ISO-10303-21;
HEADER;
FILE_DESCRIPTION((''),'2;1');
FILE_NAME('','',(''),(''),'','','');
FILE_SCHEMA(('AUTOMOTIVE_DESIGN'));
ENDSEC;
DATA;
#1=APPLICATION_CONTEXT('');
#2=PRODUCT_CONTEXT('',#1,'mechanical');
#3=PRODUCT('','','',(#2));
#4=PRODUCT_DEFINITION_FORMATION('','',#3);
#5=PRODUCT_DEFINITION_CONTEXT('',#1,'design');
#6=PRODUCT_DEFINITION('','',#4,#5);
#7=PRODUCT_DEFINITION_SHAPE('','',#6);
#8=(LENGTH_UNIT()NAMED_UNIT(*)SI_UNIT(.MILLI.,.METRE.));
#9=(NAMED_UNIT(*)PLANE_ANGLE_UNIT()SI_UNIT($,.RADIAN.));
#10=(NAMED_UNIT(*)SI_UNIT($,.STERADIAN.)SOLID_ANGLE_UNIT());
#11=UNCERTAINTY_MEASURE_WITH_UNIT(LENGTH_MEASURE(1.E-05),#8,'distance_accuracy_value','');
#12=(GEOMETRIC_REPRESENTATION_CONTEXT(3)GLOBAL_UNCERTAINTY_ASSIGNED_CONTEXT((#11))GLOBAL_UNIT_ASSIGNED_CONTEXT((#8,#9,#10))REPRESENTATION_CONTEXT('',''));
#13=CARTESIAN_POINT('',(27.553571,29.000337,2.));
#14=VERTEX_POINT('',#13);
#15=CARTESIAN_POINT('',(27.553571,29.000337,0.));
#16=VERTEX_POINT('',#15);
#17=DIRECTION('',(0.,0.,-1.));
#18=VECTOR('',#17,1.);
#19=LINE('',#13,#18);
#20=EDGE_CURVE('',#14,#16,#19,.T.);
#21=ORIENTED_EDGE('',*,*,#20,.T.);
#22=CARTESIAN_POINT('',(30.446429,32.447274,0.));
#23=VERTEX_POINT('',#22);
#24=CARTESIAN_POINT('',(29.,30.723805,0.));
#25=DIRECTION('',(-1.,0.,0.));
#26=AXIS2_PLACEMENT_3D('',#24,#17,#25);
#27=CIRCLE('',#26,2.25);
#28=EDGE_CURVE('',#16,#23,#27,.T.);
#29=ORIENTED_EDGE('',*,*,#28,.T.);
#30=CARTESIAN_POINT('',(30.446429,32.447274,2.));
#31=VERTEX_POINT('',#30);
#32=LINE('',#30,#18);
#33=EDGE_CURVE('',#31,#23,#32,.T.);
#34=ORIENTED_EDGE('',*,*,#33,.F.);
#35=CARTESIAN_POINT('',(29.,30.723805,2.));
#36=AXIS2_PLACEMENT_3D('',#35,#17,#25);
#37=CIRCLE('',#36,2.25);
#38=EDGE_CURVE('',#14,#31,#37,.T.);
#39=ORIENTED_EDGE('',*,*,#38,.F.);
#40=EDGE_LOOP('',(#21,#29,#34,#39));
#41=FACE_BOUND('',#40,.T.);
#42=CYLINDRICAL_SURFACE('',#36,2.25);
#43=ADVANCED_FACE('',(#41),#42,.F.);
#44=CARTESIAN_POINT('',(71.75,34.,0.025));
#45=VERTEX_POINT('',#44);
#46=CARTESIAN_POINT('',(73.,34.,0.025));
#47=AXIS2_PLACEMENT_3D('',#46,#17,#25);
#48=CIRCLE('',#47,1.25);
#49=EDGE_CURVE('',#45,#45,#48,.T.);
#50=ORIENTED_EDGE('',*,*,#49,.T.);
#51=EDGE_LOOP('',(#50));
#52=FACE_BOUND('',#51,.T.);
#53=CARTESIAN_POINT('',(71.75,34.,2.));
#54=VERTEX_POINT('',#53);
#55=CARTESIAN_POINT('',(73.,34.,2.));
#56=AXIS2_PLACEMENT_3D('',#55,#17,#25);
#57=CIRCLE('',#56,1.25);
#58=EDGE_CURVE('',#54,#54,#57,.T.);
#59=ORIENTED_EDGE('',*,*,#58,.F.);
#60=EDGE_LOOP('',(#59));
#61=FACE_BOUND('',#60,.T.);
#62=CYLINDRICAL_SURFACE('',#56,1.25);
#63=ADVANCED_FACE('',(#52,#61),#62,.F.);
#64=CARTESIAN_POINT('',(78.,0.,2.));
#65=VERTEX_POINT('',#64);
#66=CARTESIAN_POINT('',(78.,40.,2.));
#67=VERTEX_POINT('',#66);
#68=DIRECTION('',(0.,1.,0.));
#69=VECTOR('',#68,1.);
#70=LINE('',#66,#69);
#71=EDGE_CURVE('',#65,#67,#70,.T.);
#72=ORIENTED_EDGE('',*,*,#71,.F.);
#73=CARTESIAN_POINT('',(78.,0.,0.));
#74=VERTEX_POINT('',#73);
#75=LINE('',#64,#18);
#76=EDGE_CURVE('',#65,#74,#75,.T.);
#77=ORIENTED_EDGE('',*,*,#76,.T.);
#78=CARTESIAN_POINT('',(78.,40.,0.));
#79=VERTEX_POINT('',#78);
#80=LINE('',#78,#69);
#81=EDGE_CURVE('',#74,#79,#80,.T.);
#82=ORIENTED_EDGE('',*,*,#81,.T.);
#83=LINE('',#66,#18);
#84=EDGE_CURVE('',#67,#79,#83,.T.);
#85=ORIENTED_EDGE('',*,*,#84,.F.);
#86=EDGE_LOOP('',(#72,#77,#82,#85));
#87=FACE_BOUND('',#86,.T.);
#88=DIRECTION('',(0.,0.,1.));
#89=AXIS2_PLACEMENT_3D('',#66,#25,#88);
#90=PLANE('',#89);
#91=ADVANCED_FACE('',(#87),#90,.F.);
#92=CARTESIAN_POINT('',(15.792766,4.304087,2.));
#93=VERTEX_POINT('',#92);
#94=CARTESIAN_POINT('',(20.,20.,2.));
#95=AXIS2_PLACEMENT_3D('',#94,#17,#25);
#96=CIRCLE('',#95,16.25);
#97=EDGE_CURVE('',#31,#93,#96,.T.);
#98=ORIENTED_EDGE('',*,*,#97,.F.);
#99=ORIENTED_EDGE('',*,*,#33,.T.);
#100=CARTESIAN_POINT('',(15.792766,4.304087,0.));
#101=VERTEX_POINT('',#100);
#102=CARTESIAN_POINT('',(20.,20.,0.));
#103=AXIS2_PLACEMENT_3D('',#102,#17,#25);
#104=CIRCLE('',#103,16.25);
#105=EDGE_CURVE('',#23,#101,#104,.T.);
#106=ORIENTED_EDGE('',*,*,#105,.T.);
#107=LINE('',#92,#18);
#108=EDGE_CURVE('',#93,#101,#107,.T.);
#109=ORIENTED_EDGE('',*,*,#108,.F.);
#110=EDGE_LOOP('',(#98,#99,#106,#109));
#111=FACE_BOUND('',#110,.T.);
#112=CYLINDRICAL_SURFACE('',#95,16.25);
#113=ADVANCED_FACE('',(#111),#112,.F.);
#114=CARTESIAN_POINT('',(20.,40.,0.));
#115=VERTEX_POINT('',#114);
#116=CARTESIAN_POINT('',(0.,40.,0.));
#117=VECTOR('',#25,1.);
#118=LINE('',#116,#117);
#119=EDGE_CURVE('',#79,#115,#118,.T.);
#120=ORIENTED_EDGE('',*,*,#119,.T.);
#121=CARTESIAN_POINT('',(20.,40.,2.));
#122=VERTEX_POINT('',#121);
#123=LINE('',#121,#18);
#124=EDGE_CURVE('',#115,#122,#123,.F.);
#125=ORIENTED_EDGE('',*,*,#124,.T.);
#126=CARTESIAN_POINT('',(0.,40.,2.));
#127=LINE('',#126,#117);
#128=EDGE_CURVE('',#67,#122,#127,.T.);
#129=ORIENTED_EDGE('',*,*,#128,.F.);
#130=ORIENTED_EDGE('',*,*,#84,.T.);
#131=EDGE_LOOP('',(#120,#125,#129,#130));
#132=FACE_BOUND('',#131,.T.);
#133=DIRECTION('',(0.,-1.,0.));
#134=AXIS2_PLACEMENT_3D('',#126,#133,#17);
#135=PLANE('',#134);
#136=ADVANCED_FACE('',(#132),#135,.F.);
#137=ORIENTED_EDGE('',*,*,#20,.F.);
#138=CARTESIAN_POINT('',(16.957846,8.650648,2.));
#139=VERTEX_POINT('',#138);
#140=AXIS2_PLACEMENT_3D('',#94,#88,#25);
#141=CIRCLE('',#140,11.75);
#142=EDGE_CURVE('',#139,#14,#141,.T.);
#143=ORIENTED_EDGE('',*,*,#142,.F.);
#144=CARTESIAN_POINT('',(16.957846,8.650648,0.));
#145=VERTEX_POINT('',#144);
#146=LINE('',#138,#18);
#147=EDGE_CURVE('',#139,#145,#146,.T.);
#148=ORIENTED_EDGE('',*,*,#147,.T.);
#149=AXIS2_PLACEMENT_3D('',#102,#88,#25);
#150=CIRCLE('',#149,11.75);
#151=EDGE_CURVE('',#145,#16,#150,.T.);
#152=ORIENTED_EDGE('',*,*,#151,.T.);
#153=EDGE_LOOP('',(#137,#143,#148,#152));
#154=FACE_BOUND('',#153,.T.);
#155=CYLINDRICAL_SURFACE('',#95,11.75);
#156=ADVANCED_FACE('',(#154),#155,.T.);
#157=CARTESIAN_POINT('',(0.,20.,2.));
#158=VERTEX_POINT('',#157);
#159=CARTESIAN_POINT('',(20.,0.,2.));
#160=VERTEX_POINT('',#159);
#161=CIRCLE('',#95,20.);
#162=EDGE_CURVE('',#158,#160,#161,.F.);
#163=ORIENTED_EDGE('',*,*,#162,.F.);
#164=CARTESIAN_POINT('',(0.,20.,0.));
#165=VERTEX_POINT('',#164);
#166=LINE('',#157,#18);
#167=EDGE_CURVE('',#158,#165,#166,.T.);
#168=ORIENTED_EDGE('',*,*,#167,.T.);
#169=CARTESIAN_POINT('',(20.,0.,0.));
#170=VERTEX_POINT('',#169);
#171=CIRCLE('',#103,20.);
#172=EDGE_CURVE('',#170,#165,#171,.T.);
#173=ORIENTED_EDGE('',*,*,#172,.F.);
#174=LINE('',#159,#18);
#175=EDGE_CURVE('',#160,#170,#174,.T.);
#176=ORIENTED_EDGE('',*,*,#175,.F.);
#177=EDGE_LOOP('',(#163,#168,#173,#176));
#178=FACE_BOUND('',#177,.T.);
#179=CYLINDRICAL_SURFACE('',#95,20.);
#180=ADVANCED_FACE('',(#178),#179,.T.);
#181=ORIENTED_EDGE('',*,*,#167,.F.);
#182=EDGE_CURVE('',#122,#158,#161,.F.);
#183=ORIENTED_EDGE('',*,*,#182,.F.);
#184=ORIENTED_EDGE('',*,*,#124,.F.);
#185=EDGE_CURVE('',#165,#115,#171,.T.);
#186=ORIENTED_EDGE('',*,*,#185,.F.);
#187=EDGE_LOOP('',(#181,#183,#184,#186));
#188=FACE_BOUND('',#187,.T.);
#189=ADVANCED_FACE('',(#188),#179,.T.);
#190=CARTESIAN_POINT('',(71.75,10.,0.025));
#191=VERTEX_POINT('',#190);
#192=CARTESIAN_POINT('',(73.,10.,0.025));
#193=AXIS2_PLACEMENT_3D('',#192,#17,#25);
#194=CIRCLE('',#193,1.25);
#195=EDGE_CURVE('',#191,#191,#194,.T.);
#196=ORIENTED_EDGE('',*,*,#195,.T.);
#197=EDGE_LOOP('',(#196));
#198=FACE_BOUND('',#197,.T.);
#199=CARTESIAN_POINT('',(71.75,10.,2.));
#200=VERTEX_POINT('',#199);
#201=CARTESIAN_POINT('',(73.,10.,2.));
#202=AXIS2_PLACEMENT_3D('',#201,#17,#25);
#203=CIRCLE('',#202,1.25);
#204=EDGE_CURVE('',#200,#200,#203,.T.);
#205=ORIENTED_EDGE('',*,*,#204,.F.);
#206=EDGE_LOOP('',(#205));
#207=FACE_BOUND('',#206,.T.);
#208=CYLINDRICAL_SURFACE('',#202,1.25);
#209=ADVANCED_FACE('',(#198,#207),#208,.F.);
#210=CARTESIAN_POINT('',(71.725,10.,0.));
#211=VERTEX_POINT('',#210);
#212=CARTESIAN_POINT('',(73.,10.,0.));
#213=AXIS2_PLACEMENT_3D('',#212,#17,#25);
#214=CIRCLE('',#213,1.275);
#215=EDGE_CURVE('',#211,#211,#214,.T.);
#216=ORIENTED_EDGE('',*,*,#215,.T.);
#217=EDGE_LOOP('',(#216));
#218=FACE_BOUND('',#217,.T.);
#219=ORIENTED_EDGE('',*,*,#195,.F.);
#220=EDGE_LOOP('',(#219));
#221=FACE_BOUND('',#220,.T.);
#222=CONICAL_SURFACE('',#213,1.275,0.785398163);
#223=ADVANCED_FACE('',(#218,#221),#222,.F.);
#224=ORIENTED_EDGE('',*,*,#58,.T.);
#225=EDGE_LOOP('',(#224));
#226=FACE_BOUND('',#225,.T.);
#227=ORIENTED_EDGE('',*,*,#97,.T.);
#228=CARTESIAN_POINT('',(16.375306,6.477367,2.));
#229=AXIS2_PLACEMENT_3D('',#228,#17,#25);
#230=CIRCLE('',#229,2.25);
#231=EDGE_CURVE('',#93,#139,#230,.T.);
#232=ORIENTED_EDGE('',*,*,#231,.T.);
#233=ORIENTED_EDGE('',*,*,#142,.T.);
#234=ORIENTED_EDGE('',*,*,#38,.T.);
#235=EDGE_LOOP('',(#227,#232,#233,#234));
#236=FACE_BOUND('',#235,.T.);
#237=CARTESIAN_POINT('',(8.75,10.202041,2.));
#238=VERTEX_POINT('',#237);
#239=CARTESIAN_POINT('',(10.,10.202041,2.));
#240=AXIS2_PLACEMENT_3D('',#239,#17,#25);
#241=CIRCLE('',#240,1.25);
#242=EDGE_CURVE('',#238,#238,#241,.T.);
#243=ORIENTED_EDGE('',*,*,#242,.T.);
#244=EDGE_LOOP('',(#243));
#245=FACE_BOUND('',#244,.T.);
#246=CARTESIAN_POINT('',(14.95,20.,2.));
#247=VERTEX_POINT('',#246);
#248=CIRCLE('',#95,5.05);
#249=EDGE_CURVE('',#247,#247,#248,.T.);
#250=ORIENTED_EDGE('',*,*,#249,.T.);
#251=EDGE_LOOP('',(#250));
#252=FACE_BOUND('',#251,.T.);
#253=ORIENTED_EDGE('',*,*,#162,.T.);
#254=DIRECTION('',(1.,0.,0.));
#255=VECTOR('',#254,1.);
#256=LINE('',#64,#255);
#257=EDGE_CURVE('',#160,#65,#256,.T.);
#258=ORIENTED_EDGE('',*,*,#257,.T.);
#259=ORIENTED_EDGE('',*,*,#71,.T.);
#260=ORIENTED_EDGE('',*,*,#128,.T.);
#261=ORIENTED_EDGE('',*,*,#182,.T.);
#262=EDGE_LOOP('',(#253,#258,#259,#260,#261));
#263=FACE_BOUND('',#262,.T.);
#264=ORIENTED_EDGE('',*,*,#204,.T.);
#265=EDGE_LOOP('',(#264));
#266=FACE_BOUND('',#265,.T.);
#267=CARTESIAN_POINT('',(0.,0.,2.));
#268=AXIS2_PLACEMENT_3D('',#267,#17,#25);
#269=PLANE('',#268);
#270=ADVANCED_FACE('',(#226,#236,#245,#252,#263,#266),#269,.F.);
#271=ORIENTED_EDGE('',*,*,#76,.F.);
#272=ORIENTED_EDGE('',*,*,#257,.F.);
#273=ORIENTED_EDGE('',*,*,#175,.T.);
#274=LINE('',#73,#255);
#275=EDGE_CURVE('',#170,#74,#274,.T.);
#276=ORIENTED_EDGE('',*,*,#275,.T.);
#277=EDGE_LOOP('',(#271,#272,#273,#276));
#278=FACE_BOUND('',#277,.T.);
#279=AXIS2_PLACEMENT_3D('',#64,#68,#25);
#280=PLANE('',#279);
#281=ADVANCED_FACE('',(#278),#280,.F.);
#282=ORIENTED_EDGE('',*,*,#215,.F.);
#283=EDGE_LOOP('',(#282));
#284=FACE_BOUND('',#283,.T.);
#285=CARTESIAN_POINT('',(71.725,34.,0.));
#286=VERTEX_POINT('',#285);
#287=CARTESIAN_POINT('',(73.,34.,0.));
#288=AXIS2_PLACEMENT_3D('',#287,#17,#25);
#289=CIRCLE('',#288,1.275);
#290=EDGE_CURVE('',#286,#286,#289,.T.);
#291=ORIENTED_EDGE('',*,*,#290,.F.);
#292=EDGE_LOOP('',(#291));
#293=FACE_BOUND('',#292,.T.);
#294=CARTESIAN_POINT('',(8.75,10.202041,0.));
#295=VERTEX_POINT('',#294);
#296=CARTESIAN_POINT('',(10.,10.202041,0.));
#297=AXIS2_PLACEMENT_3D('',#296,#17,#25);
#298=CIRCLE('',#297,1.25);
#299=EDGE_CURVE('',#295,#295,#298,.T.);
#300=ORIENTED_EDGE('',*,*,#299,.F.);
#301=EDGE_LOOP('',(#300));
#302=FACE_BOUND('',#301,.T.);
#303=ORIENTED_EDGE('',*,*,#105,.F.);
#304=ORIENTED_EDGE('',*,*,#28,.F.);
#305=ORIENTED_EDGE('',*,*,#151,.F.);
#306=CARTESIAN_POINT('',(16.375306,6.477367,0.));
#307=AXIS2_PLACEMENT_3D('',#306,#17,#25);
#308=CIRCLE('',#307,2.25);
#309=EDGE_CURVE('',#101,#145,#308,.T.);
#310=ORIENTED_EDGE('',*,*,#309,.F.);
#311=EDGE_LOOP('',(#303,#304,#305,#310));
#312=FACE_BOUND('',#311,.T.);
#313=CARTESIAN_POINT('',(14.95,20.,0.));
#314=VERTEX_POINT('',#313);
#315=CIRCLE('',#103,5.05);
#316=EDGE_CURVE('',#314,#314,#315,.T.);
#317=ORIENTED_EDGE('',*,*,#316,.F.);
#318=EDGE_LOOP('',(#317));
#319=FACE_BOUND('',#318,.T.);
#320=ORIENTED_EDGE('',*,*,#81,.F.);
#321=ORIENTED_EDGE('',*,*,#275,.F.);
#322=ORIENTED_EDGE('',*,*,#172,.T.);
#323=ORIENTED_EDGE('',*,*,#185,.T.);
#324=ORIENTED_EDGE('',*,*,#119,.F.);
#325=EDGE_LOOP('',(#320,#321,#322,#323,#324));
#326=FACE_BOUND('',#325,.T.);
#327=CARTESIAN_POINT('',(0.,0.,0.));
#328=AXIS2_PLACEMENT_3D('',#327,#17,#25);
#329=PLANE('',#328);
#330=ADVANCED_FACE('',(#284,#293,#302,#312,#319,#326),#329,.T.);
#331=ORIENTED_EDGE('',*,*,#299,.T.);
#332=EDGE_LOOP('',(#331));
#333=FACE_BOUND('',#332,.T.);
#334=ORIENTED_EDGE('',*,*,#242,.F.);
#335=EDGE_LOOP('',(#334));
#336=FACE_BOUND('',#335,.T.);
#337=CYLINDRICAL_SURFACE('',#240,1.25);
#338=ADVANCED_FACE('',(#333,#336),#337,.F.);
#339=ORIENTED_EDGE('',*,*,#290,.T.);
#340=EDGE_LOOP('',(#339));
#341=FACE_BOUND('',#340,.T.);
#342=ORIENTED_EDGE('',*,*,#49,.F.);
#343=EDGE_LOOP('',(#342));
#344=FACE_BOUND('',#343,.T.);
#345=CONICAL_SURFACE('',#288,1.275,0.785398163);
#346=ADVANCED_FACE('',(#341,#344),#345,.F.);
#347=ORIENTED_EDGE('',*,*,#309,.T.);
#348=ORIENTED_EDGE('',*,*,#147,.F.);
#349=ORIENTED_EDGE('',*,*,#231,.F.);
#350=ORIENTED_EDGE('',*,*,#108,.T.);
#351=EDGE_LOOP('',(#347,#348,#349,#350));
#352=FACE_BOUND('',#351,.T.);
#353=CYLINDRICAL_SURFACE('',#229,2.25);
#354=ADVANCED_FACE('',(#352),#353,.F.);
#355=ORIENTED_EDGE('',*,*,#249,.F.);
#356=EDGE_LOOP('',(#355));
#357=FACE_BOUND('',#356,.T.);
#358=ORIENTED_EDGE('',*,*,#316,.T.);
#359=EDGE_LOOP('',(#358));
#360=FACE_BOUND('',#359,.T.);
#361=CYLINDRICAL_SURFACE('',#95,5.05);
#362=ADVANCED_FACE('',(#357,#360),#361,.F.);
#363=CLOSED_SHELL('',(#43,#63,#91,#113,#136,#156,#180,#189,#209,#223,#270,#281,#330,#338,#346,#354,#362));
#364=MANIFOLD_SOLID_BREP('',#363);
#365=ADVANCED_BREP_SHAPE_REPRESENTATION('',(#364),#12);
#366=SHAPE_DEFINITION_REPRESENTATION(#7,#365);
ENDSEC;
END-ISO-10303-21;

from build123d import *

# Parameters (mm, degrees)
SKETCH_2_W                   = 78
SKETCH_2_H                   = 40
EXTRUDE_1_DEPTH              = 2
SKETCH_3_R                   = 5.05
SKETCH_3_R_2                 = 1.25
CUT_EXTRUDE_1_DEPTH          = 88.681240867
SKETCH_4_R                   = 1.25
CUT_EXTRUDE_2_DEPTH          = 88.681240867
FILLET_1_R                   = 20
HOLE_WIZARD_M3_1_D           = 2.5
HOLE_WIZARD_M3_1_CSINK_D     = 2.55
HOLE_WIZARD_M3_1_CSINK_ANGLE = 90


with BuildPart() as part:
    # 草图2 → 凸台-拉伸1 (new body)
    with BuildSketch(Plane.XY):
        with Locations((39, 20)):
            Rectangle(SKETCH_2_W, SKETCH_2_H)
    extrude(amount=EXTRUDE_1_DEPTH)

    # 草图3 → 切除-拉伸1 (cut, through all)
    with BuildSketch(Plane(origin=(0, 0, 0), x_dir=(-1, 0, 0), z_dir=(0, 0, -1))):
        with Locations((-20, 20)):
            Circle(SKETCH_3_R)
        with Locations((-10, 10.202041029)):
            Circle(SKETCH_3_R_2)
        with BuildLine():
            ThreePointArc((-30.446428571, 32.447274003), (-34.413244876, 12.495276677), (-15.792765742, 4.30408716))
            ThreePointArc((-15.792765742, 4.30408716), (-14.20202563, 7.059907527), (-16.957845998, 8.650647638))
            ThreePointArc((-16.957845998, 8.650647638), (-30.421884756, 14.573507751), (-27.553571429, 29.000336587))
            ThreePointArc((-27.553571429, 29.000336587), (-27.276531292, 32.170233866), (-30.446428571, 32.447274003))
        make_face()
    extrude(amount=-CUT_EXTRUDE_1_DEPTH, mode=Mode.SUBTRACT)

    # 草图4 → 切除-拉伸2 (cut, through all)
    with BuildSketch(Plane(origin=(0, 0, 0), x_dir=(-1, 0, 0), z_dir=(0, 0, -1))):
        with Locations((-73, 34)):
            Circle(SKETCH_4_R)
        with Locations((-73, 10)):
            Circle(SKETCH_4_R)
    extrude(amount=-CUT_EXTRUDE_2_DEPTH, mode=Mode.SUBTRACT)

    # 圆角1
    fillet_1_edges = [part.edges().sort_by_distance(p)[0] for p in [
        (0, 40, 1),
        (0, 0, 1),
    ]]
    fillet(fillet_1_edges, radius=FILLET_1_R - 0.0001)  # a hair under: the kernel refuses the full size

    # M3 螺纹孔的螺纹孔钻头1 (through all)
    with Locations(Plane(origin=(73, 34, 0), x_dir=(-1, 0, 0), z_dir=(0, 0, -1))):
        with Locations((0, 0), (0, -24)):
            CounterSinkHole(HOLE_WIZARD_M3_1_D / 2, HOLE_WIZARD_M3_1_CSINK_D / 2, counter_sink_angle=HOLE_WIZARD_M3_1_CSINK_ANGLE)


solid = part.part
